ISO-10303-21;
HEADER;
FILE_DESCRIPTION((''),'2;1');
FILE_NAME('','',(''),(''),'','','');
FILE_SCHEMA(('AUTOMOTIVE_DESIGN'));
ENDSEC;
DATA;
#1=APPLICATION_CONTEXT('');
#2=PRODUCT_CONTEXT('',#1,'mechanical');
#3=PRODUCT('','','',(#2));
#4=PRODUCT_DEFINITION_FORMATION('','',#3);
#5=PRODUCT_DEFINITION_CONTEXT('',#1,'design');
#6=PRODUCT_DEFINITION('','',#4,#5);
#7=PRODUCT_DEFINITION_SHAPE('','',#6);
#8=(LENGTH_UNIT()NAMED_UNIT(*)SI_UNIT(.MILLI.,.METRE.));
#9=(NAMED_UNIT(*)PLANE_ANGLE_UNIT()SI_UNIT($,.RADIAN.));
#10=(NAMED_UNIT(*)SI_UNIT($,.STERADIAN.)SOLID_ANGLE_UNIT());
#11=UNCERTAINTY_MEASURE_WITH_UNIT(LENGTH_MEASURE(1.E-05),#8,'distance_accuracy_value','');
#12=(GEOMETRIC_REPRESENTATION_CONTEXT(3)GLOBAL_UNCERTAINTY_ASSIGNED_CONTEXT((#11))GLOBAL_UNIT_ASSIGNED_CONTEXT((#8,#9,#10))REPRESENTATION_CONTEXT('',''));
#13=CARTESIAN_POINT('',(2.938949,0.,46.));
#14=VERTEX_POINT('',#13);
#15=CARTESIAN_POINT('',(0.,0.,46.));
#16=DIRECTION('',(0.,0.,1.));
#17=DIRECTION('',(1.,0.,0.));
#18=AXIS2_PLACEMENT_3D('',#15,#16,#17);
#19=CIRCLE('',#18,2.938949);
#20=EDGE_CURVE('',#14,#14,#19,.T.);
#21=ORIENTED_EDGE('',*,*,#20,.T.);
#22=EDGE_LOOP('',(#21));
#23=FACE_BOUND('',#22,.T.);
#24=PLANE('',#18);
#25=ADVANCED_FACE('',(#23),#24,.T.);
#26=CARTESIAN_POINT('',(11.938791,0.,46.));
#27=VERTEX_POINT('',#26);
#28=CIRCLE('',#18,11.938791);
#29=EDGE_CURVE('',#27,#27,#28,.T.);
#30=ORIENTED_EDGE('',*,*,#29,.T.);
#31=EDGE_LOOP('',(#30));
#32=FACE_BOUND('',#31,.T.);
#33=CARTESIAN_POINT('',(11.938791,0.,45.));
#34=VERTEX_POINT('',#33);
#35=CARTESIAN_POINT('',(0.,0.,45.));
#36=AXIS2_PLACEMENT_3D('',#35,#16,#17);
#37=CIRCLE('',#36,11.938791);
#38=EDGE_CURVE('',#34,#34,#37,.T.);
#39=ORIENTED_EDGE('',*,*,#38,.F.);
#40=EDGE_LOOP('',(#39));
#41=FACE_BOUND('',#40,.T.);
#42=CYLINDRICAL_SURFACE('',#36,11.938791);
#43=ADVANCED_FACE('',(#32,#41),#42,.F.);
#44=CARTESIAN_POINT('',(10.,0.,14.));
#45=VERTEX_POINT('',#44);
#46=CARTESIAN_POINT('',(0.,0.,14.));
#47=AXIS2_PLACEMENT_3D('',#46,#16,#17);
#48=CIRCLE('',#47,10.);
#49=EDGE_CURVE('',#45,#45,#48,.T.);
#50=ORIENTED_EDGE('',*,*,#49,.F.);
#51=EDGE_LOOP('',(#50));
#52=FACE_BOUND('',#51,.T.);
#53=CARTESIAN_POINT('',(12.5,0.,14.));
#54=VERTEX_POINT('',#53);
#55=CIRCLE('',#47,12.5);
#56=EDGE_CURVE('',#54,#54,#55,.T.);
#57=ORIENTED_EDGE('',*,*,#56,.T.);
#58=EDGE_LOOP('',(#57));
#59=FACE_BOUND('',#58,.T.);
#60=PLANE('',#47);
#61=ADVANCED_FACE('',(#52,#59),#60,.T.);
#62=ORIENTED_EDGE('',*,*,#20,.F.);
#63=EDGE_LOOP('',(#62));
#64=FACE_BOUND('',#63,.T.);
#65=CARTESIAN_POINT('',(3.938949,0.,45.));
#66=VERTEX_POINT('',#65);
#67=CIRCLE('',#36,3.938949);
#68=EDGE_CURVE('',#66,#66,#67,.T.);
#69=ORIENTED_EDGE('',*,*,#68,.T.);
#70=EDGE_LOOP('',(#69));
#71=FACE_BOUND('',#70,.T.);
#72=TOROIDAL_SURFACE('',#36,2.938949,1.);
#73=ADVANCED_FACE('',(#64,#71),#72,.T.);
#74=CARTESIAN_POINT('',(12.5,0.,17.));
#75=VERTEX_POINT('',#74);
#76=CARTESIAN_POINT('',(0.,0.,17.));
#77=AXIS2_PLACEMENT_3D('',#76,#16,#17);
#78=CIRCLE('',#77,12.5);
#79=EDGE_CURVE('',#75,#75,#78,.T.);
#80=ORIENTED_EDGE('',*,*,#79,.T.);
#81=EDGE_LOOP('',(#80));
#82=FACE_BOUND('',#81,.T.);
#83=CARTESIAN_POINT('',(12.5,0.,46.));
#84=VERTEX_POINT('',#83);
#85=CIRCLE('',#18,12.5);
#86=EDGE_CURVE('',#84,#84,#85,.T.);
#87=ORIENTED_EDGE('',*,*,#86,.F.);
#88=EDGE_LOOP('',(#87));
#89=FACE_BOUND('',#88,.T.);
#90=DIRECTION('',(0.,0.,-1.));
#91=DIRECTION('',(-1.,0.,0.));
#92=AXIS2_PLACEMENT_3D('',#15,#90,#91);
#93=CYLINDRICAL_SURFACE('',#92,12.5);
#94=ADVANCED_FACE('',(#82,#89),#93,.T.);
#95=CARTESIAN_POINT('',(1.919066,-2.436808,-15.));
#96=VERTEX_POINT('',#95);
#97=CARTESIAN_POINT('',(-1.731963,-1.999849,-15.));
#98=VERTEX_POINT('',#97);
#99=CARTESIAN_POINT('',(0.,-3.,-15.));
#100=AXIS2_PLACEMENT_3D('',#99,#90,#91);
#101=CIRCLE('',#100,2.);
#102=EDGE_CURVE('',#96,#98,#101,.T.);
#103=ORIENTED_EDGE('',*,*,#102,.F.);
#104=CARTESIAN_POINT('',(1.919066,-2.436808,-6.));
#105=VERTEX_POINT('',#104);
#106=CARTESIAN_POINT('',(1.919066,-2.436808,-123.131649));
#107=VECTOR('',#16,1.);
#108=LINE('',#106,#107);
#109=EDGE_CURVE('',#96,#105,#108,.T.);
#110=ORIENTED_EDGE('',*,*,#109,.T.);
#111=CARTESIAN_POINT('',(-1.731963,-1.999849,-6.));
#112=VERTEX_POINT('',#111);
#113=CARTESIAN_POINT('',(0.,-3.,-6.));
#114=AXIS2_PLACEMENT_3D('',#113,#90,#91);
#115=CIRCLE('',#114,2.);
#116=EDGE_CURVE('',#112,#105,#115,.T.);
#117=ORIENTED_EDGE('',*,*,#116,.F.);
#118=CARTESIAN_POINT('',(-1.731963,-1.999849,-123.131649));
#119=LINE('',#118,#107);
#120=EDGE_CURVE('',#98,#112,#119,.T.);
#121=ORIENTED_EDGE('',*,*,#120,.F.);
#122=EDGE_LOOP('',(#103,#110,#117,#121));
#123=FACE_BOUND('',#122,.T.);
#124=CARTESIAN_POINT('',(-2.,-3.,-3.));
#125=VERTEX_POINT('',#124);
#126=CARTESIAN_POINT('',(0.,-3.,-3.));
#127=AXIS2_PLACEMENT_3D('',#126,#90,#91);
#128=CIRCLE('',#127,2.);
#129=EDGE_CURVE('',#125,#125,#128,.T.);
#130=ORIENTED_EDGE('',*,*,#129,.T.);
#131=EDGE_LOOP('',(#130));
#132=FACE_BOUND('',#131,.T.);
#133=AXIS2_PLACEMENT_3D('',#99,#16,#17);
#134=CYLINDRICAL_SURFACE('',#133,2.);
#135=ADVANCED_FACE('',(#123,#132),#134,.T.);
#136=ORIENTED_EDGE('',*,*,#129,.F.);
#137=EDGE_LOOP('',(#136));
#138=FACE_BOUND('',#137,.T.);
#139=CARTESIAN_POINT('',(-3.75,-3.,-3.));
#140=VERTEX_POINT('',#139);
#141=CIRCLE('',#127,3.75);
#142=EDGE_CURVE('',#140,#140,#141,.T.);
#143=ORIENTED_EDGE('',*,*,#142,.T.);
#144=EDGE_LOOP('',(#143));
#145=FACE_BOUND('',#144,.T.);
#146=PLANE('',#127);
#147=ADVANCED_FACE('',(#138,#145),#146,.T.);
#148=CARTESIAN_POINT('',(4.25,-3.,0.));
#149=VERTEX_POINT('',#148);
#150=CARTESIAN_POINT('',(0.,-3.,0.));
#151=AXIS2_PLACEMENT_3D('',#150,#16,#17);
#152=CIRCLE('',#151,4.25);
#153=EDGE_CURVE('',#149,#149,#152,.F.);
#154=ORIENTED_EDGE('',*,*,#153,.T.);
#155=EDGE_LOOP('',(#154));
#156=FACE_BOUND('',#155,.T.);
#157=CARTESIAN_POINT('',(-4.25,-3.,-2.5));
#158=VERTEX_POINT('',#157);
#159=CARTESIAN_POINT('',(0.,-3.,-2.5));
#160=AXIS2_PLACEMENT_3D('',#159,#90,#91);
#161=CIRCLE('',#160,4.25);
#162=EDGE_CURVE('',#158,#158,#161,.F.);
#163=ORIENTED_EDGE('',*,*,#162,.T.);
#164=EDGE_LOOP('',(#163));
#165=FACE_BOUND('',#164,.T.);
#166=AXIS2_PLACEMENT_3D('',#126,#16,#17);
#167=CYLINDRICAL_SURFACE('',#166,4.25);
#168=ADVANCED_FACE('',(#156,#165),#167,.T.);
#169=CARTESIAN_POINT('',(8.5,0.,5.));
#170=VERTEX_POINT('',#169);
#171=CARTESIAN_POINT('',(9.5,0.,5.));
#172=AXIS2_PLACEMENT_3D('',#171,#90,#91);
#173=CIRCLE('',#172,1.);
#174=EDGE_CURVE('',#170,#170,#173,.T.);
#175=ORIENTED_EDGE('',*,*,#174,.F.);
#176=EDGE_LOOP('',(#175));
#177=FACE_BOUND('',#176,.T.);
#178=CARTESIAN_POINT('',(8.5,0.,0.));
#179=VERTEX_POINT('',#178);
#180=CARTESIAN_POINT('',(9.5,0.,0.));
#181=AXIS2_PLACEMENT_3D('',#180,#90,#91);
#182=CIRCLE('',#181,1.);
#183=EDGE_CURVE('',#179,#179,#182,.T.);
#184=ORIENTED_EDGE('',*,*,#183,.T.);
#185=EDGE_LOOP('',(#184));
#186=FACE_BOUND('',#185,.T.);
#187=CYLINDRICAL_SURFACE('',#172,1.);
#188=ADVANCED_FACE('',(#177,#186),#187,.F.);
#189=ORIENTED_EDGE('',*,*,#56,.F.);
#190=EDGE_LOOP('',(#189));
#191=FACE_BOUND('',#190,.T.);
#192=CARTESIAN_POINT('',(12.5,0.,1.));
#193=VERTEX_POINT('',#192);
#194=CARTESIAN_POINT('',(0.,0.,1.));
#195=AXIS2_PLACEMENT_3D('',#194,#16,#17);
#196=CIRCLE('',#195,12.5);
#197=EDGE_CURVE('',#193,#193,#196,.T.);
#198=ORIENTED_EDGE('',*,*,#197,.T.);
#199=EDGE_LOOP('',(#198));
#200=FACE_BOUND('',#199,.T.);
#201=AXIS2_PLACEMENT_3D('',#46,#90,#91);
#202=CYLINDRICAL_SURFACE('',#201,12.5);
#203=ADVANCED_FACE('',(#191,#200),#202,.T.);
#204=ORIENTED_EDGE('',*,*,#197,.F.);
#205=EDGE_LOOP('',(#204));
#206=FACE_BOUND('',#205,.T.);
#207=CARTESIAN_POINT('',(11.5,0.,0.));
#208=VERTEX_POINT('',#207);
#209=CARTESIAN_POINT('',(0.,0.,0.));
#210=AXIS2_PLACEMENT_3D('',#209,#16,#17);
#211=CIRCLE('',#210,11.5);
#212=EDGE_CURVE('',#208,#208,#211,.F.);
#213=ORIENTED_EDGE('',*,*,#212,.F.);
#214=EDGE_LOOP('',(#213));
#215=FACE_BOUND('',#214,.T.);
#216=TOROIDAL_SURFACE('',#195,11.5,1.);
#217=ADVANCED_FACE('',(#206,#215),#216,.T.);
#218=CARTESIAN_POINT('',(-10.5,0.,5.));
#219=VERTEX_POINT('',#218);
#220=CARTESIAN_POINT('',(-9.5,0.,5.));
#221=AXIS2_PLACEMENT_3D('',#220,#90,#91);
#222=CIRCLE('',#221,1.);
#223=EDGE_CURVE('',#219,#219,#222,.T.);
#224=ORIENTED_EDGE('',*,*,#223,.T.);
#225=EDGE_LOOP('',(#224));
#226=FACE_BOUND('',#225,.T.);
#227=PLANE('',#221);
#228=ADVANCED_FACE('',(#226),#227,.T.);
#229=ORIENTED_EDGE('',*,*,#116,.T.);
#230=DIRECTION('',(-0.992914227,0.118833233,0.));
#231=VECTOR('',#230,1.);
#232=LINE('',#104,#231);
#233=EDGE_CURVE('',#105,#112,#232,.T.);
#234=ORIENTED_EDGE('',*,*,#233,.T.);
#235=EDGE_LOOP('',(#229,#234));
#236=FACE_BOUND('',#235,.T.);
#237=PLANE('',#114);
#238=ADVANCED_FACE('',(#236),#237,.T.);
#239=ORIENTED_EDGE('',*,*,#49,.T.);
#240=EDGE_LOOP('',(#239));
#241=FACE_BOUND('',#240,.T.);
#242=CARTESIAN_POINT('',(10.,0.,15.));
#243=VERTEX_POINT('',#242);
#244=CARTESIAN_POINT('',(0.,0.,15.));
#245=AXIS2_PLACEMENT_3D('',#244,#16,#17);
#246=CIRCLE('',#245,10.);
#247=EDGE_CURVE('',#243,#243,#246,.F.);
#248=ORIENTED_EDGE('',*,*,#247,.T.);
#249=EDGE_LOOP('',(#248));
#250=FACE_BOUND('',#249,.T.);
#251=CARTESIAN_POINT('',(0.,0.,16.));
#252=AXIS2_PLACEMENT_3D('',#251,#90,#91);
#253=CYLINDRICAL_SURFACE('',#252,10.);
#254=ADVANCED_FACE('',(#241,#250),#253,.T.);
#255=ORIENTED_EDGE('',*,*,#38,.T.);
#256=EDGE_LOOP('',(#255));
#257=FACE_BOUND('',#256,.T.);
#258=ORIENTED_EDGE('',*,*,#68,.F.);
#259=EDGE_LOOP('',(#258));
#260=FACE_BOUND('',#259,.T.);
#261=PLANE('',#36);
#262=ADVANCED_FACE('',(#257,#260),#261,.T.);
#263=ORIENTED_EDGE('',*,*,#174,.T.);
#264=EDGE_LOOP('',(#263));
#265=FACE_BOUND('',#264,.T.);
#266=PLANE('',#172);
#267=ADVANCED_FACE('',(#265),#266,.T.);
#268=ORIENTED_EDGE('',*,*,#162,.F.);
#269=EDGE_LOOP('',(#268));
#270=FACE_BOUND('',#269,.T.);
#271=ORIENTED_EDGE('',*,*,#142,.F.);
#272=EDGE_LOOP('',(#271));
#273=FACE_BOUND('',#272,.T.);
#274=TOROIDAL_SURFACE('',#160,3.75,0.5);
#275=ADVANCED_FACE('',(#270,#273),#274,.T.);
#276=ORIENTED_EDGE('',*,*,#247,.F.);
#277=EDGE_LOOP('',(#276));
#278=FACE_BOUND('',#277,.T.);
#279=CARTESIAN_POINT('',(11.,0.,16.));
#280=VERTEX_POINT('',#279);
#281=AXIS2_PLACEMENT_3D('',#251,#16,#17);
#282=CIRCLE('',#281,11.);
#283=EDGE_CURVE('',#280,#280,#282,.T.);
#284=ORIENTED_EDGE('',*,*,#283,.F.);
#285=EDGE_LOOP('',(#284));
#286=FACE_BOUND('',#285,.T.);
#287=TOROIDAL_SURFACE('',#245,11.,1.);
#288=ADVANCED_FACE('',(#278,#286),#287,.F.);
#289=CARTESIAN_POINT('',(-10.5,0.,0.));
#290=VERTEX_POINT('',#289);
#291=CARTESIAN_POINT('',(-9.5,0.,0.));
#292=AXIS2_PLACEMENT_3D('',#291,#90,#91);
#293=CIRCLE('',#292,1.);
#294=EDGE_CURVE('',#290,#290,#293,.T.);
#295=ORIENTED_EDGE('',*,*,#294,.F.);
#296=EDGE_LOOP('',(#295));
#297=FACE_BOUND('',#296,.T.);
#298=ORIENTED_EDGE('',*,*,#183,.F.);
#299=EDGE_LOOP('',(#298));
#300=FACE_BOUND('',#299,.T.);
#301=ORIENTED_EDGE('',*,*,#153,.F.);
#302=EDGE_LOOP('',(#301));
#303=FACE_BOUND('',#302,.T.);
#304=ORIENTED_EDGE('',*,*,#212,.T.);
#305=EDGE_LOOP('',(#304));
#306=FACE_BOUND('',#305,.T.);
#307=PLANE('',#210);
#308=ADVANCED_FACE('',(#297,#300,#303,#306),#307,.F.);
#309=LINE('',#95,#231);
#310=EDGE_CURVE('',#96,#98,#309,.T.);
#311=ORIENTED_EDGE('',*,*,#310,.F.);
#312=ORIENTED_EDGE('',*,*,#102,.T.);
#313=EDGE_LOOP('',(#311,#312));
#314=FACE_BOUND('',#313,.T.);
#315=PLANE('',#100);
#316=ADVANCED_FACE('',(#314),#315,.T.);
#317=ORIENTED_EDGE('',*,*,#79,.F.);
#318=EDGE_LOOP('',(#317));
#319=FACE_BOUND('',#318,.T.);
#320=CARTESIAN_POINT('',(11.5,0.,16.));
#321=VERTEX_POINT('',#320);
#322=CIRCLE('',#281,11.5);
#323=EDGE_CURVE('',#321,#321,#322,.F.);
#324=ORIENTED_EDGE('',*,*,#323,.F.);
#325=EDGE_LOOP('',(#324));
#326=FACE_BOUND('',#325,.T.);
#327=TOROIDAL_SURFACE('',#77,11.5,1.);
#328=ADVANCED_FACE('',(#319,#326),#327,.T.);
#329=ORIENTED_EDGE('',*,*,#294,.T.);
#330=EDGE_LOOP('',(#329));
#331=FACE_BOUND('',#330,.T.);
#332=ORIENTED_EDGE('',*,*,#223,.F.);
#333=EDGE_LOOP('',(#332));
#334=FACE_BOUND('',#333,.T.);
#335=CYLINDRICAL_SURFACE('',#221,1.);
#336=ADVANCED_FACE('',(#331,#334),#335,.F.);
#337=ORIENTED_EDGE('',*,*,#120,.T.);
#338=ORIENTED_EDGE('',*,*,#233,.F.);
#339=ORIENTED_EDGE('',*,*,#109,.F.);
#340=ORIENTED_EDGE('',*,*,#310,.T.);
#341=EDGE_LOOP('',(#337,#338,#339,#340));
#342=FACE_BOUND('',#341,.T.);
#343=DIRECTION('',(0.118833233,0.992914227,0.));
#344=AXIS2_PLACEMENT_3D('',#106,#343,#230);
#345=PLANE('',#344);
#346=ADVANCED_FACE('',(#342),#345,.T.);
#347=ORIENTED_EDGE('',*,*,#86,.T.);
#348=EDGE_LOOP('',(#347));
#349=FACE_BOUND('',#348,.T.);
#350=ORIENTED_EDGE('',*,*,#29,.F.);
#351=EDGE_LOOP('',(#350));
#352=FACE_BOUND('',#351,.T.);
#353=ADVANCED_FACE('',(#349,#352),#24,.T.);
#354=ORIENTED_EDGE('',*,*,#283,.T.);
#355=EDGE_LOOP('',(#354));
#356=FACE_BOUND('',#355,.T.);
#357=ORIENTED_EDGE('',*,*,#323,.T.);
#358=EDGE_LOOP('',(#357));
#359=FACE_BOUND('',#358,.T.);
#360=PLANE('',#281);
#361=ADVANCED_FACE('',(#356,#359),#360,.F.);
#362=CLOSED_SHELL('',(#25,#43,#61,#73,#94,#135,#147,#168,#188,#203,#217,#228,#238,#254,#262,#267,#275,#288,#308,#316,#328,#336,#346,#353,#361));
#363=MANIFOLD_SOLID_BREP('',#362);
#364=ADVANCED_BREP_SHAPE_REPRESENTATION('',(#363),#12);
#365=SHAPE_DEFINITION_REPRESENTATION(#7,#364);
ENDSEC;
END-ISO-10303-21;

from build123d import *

# Parameters (mm, degrees)
SKETCH1_R               = 12.5
BOSS_EXTRUDE1_DEPTH     = 14
SKETCH2_R               = 10
BOSS_EXTRUDE2_DEPTH     = 2
SKETCH3_R               = 12.5
BOSS_EXTRUDE3_DEPTH     = 30
SKETCH4_R               = 11.938790889
CUT_EXTRUDE1_DEPTH      = 1
SKETCH5_R               = 3.938949389
BOSS_EXTRUDE4_DEPTH     = 1
FILLET1_R               = 1
FILLET2_R               = 1
FILLET3_R               = 1
SKETCH6_R               = 1
CUT_EXTRUDE2_DEPTH      = 5
SKETCH7_R               = 4.25
BOSS_EXTRUDE5_DEPTH     = 3
FILLET4_R               = 0.5
SKETCH8_R               = 2
BOSS_EXTRUDE6_DEPTH     = 12
CUT_EXTRUDE3_DEPTH      = 64.509841777
CUT_EXTRUDE3_DEPTH_BACK = 9


with BuildPart() as part:
    # Sketch1 → Boss-Extrude1 (new body)
    with BuildSketch(Plane.XY):
        Circle(SKETCH1_R)
    extrude(amount=BOSS_EXTRUDE1_DEPTH)

    # Sketch2 → Boss-Extrude2 (add)
    with BuildSketch(Plane.XY.offset(14)):
        Circle(SKETCH2_R)
    extrude(amount=BOSS_EXTRUDE2_DEPTH)

    # Sketch3 → Boss-Extrude3 (add)
    with BuildSketch(Plane.XY.offset(16)):
        Circle(SKETCH3_R)
    extrude(amount=BOSS_EXTRUDE3_DEPTH)

    # Sketch4 → Cut-Extrude1 (cut)
    with BuildSketch(Plane.XY.offset(46)):
        Circle(SKETCH4_R)
    extrude(amount=-CUT_EXTRUDE1_DEPTH, mode=Mode.SUBTRACT)

    # Sketch5 → Boss-Extrude4 (add)
    with BuildSketch(Plane.XY.offset(45)):
        Circle(SKETCH5_R)
    extrude(amount=BOSS_EXTRUDE4_DEPTH)

    # Fillet1
    fillet1_edges = [part.edges().sort_by_distance(p)[0] for p in [
        (-3.938949389, 0, 46),
    ]]
    fillet(fillet1_edges, radius=FILLET1_R - 0.0001)  # a hair under: the kernel refuses the full size

    # Fillet2
    fillet2_edges = [part.edges().sort_by_distance(p)[0] for p in [
        (-12.5, 0, 0),
    ]]
    fillet(fillet2_edges, radius=FILLET2_R)

    # Fillet3
    fillet3_edges = [part.edges().sort_by_distance(p)[0] for p in [
        (-12.5, 0, 16),
        (-10, 0, 16),
    ]]
    fillet(fillet3_edges, radius=FILLET3_R)

    # Sketch6 → Cut-Extrude2 (cut)
    with BuildSketch(Plane(origin=(0, 0, 0), x_dir=(-1, 0, 0), z_dir=(0, 0, -1))):
        with Locations((-9.5, 0)):
            Circle(SKETCH6_R)
        with Locations((9.5, 0)):
            Circle(SKETCH6_R)
    extrude(amount=-CUT_EXTRUDE2_DEPTH, mode=Mode.SUBTRACT)

    # Sketch7 → Boss-Extrude5 (add)
    with BuildSketch(Plane(origin=(0, 0, 0), x_dir=(-1, 0, 0), z_dir=(0, 0, -1))):
        with Locations(Location((0, -3, 0), (0, 0, 180))):
            Circle(SKETCH7_R)
    extrude(amount=BOSS_EXTRUDE5_DEPTH)

    # Fillet4
    fillet4_edges = [part.edges().sort_by_distance(p)[0] for p in [
        (-4.25, -3, -3),
    ]]
    fillet(fillet4_edges, radius=FILLET4_R)

    # Sketch8 → Boss-Extrude6 (add)
    with BuildSketch(Plane(origin=(0, 0, -3), x_dir=(-1, 0, 0), z_dir=(0, 0, -1))):
        with Locations((0, -3)):
            Circle(SKETCH8_R)
    extrude(amount=BOSS_EXTRUDE6_DEPTH)

    # Sketch9 → Cut-Extrude3 (cut, two sides: drawn at the far end of the back side and taken through both)
    with BuildSketch(Plane(origin=(0, 0, -15), x_dir=(-1, 0, 0), z_dir=(0, 0, -1)).offset(-CUT_EXTRUDE3_DEPTH_BACK)):
        Polygon((-53.075925999, -8.559326208), (-1.919066235, -2.436808394), (1.731963356, -1.999848545), (52.88882312, 4.122669269), (40.643787491, 106.436388797), (-65.320961628, 93.754393319), align=None)
    extrude(amount=CUT_EXTRUDE3_DEPTH + CUT_EXTRUDE3_DEPTH_BACK, mode=Mode.SUBTRACT)


solid = part.part
